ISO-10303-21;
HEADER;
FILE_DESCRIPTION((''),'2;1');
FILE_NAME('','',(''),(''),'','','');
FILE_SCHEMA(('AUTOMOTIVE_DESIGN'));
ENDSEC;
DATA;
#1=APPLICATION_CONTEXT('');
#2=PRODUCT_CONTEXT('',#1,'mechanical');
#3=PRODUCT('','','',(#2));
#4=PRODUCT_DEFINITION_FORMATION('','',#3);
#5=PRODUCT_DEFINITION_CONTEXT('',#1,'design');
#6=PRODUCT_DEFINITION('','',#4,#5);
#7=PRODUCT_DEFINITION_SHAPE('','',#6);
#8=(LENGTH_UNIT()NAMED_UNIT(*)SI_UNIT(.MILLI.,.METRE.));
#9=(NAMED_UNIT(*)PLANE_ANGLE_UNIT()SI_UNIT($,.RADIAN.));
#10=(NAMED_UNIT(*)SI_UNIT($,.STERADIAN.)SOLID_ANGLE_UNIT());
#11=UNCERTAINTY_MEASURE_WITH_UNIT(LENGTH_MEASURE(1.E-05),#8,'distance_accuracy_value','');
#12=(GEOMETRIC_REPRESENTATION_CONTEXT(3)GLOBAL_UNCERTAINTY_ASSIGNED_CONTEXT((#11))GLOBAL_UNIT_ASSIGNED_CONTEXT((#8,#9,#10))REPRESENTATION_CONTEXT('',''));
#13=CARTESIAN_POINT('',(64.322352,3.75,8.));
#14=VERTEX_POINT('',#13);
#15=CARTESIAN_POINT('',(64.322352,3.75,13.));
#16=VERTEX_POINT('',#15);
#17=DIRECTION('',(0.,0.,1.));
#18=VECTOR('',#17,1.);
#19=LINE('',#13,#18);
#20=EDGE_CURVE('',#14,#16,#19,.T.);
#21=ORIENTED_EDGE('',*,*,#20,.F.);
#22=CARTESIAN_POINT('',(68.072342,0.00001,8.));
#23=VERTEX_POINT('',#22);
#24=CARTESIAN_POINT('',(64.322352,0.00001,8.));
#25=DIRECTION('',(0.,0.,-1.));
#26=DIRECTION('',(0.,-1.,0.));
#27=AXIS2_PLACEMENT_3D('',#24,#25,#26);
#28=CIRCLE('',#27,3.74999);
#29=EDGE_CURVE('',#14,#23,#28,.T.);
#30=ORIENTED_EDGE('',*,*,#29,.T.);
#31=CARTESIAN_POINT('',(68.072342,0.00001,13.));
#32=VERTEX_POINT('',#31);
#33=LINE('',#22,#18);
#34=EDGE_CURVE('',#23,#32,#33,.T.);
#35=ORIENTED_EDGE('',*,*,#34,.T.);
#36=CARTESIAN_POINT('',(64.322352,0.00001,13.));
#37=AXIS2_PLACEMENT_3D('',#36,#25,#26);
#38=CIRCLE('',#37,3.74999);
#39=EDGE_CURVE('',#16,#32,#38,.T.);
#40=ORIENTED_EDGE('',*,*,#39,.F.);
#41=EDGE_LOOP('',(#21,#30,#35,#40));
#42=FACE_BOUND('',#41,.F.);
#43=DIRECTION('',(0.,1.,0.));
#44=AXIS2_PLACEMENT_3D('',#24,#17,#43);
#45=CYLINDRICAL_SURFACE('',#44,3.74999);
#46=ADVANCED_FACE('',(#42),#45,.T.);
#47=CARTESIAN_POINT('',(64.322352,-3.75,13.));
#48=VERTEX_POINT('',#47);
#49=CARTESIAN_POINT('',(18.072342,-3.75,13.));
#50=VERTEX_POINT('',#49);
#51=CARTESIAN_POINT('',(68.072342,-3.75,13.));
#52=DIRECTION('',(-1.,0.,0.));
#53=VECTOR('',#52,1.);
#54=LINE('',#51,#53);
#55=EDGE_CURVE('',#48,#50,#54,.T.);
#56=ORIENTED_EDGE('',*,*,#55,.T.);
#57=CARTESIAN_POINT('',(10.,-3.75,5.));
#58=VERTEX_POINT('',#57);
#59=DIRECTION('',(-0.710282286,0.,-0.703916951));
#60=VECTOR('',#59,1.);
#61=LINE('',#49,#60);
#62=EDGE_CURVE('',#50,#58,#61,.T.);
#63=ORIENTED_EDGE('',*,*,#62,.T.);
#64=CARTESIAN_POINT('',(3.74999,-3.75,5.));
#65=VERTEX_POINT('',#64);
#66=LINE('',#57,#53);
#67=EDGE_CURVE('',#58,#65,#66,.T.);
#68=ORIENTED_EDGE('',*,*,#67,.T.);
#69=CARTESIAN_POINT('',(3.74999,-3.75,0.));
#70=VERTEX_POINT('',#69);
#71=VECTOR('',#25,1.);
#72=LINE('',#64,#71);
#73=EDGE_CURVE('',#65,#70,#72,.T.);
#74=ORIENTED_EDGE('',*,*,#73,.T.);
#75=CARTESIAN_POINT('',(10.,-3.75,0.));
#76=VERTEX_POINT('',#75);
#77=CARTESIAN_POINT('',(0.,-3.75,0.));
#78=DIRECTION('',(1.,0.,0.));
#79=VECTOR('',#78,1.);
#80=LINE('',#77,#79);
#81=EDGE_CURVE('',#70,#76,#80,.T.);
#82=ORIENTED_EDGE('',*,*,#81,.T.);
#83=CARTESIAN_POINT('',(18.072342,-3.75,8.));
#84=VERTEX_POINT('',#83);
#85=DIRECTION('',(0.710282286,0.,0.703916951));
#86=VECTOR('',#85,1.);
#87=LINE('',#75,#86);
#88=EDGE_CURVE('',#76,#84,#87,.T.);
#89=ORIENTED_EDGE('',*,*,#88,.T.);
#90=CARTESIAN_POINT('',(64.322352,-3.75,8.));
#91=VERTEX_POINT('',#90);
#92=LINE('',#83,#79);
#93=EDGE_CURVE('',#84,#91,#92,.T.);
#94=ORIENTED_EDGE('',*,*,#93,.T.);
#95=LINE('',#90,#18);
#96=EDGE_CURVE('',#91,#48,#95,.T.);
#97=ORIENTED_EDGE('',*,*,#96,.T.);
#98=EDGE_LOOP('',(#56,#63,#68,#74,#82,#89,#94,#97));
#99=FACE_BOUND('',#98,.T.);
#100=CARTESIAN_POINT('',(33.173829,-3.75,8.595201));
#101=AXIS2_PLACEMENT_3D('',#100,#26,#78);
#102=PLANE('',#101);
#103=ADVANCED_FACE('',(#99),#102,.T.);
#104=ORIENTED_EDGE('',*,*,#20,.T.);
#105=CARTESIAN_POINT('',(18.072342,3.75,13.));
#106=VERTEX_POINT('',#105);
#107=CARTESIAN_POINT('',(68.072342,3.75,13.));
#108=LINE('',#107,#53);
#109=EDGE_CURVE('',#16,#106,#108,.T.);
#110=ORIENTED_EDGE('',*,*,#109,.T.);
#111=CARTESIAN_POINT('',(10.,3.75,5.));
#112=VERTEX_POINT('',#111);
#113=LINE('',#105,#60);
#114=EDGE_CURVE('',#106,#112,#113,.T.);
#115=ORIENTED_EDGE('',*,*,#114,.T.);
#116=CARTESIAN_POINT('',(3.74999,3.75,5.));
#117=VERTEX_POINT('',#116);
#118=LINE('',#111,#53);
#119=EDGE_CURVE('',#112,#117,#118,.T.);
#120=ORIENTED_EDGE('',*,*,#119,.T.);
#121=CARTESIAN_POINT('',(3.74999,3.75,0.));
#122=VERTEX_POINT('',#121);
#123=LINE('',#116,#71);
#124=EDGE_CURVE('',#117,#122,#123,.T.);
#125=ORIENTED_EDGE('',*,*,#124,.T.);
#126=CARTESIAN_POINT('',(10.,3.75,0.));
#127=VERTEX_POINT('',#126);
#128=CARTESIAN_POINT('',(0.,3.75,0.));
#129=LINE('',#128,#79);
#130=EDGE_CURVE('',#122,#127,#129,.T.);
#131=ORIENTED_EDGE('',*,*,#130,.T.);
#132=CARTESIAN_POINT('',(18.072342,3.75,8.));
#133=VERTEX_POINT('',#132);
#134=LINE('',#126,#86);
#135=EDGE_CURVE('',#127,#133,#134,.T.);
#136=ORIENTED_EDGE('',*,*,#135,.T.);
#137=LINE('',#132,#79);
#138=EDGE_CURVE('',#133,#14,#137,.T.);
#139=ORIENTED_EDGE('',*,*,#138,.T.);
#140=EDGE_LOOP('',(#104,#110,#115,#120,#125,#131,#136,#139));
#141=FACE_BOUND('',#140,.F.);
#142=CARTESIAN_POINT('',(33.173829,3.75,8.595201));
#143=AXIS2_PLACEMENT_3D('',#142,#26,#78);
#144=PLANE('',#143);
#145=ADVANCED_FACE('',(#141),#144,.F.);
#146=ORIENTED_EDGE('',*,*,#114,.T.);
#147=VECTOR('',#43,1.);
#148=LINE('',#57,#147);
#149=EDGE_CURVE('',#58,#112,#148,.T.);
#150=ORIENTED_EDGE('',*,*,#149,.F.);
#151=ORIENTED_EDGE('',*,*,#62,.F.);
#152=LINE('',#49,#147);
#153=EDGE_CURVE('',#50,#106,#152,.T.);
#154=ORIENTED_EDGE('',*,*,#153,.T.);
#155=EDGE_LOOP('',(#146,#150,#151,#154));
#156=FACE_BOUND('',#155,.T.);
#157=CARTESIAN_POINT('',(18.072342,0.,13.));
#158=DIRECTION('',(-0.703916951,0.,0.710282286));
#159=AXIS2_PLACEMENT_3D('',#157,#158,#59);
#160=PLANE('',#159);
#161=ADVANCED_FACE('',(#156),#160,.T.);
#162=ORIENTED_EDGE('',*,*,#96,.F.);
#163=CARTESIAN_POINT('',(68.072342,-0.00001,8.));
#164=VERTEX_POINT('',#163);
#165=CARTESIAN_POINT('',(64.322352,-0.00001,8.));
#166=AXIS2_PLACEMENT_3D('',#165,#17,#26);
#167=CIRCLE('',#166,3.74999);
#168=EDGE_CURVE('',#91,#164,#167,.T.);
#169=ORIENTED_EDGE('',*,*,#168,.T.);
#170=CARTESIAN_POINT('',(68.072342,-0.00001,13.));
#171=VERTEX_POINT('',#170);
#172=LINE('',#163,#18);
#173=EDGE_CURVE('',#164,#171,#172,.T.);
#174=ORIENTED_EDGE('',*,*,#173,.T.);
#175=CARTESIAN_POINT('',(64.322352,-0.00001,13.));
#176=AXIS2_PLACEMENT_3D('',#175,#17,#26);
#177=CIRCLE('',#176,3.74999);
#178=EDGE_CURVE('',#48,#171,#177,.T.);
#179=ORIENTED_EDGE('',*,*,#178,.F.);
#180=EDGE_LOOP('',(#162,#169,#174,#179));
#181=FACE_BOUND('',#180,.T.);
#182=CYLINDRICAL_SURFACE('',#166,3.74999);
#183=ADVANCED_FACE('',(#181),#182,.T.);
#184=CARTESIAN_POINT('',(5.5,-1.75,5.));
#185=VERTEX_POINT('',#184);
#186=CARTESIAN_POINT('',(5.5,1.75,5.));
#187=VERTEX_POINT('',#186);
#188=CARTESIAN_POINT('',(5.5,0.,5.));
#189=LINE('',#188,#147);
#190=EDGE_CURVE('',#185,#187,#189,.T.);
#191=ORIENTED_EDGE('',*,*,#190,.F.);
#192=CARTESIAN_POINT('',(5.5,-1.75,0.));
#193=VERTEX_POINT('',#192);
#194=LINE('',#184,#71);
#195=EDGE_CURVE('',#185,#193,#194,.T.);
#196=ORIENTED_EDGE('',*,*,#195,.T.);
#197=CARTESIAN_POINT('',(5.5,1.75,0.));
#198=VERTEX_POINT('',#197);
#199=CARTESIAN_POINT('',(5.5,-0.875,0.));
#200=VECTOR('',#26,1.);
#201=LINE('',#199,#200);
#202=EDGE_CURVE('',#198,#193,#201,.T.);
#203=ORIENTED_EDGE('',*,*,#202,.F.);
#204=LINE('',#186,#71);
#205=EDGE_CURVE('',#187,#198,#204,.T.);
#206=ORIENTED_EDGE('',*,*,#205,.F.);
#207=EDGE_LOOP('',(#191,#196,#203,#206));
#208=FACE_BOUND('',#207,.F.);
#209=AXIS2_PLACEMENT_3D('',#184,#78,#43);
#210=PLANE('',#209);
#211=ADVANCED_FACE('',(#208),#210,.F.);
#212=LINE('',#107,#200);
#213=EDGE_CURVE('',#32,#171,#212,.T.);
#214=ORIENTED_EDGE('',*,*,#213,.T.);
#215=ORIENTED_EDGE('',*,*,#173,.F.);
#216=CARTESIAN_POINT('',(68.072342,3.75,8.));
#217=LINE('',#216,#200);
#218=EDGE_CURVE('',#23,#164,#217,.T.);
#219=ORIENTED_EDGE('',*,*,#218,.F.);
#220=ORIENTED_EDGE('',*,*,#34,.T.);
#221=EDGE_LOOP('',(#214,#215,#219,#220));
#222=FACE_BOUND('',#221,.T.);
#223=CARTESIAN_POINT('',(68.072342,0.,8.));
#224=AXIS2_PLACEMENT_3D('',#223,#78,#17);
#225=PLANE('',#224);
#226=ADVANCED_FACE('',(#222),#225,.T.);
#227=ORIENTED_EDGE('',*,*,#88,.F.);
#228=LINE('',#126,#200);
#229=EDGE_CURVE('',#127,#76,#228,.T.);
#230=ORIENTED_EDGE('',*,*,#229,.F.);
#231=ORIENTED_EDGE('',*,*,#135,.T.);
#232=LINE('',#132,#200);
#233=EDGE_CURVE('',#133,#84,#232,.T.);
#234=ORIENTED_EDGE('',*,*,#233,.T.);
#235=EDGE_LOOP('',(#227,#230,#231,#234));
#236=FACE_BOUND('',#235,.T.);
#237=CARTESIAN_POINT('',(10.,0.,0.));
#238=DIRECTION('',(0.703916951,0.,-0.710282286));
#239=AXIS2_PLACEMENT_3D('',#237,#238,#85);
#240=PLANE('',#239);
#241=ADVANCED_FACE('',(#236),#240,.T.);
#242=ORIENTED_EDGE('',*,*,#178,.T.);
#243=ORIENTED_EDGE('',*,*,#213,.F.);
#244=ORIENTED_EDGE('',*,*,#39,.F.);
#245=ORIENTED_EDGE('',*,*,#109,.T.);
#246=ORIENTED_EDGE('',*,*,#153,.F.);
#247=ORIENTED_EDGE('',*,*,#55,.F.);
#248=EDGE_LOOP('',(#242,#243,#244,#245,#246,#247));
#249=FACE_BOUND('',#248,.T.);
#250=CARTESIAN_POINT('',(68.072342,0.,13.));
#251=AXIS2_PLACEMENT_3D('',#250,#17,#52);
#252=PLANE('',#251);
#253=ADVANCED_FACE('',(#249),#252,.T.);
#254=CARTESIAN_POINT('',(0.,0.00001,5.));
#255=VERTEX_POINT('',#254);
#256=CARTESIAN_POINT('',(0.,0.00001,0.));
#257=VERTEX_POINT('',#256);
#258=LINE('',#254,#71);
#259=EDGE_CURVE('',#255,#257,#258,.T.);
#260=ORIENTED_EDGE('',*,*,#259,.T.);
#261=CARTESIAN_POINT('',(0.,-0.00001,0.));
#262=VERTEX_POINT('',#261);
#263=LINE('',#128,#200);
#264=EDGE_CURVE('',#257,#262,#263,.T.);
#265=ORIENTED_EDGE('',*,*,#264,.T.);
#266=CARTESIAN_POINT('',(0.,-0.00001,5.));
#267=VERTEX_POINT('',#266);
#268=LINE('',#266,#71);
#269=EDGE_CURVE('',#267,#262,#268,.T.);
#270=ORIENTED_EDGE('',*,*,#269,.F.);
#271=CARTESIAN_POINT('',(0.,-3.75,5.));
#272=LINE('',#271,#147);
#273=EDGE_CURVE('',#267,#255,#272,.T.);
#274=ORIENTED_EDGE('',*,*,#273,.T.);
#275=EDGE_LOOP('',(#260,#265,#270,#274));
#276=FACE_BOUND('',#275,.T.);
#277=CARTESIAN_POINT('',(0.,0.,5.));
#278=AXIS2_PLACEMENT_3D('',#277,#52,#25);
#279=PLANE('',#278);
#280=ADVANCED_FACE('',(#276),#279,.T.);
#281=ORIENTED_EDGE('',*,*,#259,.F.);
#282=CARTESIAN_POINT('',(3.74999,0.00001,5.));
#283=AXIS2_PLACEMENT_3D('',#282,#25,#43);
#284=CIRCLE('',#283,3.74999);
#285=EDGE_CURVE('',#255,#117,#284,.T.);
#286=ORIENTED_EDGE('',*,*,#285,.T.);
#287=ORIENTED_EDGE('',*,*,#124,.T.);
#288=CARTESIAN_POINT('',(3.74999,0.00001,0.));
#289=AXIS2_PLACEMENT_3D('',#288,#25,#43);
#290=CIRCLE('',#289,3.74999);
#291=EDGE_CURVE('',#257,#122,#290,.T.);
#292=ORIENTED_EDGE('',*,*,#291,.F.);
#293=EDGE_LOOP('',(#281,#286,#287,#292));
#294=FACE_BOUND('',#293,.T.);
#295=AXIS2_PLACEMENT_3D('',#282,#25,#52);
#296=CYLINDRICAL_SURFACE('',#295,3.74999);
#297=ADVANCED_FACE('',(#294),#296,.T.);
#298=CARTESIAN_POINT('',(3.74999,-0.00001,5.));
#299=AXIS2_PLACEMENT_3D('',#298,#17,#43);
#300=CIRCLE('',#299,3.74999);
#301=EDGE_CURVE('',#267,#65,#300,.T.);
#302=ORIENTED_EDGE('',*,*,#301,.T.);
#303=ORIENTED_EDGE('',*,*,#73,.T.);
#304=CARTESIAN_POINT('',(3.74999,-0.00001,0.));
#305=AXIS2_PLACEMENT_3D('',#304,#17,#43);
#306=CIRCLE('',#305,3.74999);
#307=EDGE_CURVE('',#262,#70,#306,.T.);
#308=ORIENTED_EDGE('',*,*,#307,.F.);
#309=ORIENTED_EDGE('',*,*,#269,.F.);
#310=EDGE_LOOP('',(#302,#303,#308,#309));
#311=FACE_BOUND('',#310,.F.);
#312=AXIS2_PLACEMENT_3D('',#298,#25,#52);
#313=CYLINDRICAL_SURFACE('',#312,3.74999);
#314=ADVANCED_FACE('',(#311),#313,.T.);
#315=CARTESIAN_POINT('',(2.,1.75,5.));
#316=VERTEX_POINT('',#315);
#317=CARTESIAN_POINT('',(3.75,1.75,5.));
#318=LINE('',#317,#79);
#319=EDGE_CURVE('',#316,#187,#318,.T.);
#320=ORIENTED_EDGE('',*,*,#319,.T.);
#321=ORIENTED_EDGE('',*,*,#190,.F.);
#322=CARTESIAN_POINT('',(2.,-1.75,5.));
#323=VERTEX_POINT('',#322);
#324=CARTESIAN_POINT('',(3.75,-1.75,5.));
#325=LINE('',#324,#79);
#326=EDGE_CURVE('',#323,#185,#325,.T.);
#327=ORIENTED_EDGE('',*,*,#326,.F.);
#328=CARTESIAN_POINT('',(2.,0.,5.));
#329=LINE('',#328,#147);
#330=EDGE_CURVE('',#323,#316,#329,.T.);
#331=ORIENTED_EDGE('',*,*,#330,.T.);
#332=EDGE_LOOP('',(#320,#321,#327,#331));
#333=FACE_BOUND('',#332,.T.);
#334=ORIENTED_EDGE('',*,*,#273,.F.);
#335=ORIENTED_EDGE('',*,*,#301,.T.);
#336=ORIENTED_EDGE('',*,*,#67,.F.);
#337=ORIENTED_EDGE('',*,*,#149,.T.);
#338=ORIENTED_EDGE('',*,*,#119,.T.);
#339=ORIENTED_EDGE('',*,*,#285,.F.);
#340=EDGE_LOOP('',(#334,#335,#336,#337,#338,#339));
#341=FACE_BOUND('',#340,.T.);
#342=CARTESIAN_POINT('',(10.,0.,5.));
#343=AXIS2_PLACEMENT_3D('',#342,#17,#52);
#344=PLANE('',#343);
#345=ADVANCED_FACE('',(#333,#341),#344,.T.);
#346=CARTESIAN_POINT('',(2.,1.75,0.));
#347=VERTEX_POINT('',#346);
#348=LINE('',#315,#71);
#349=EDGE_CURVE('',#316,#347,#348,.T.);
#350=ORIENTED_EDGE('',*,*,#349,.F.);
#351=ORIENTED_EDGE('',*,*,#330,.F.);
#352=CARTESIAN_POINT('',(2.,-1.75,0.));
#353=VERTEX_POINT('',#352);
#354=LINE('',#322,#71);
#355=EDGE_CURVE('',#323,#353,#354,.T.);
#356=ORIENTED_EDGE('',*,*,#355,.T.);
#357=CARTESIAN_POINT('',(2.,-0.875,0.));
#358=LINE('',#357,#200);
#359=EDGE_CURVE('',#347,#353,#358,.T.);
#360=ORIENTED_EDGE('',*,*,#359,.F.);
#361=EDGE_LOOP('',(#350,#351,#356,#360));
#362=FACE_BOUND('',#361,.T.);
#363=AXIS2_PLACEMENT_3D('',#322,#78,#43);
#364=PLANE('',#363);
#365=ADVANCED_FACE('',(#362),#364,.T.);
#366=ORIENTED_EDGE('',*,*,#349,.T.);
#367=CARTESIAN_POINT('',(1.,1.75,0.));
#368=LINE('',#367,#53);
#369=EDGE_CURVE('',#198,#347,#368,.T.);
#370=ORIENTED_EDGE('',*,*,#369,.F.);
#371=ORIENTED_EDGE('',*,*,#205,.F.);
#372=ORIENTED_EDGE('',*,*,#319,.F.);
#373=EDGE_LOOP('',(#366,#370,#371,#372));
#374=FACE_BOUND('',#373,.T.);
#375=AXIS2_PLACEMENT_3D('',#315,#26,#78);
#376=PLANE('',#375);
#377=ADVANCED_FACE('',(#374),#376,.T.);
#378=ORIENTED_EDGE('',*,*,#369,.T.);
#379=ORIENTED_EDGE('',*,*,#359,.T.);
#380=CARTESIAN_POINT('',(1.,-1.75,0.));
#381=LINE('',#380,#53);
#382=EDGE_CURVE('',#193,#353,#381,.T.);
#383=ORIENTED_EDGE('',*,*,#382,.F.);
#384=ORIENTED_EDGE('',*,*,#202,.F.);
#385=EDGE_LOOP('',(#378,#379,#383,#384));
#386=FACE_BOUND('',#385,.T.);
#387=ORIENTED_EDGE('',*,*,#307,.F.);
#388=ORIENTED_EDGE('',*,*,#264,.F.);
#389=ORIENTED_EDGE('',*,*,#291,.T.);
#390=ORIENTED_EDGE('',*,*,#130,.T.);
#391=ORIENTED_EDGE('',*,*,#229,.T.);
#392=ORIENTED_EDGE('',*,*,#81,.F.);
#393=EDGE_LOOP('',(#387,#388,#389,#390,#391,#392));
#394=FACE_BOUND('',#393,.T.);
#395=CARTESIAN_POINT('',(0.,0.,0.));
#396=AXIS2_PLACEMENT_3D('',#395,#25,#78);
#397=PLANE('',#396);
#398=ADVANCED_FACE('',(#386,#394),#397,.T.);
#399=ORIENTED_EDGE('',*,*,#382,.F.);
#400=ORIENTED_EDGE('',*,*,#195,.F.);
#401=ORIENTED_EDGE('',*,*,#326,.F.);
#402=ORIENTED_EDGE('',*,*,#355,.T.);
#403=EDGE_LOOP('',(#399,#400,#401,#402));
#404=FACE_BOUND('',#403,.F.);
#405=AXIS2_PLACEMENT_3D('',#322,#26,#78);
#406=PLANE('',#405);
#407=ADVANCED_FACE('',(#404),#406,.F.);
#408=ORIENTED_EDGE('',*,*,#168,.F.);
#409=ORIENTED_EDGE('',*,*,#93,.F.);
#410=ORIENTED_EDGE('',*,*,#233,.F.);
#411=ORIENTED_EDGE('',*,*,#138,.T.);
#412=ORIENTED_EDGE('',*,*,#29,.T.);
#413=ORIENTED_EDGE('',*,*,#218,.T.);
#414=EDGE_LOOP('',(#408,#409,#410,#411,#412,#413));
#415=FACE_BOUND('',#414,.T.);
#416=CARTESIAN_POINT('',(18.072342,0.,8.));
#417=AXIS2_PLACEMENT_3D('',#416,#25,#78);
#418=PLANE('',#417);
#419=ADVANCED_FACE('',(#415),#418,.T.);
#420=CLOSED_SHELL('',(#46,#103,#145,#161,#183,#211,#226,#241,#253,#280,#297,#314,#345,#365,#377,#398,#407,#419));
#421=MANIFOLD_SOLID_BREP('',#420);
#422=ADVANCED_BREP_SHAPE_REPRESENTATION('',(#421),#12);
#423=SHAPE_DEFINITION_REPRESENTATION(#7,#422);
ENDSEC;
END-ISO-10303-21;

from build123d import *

# Parameters (mm, degrees)
F1_DEPTH      = 3.75
F1_DEPTH_BACK = 3.75
F2_W          = 3.5
F2_H          = 3.5
F3_DEPTH      = 5.001
F4_R          = 3.74999
F5_R          = 3.74999


# Not quite as in the source:
# - a fillet or chamfer is up to 0.001 mm smaller than in the source, because OpenCascade refuses the exact size


with BuildPart() as f1:
    # F0 (on Front) → F1 (new body, two sides)
    with BuildSketch(Plane.XZ) as f1_sk:
        Polygon((0, 5), (0, 0), (10, 0), (18.0723418804, 8), (68.0723418804, 8), (68.0723418804, 13), (18.0723418804, 13), (10, 5), align=None)
    extrude(amount=F1_DEPTH)
    extrude(f1_sk.sketch, amount=-F1_DEPTH_BACK)

    # F2 (on face) → F3 (cut, through all)
    with BuildSketch(Plane.XY.offset(5)):
        with Locations((3.75, 0)):
            Rectangle(F2_W, F2_H)
    extrude(amount=-F3_DEPTH, mode=Mode.SUBTRACT)

    # F4 (radius 3.75 in the source; OpenCascade refuses exactly that, so slightly less here)
    f4_edges = [f1.edges().sort_by_distance(p)[0] for p in [
        (0, -3.75, 2.5),
        (0, 3.75, 2.5),
    ]]
    fillet(f4_edges, radius=F4_R)

    # F5 (radius 3.75 in the source; OpenCascade refuses exactly that, so slightly less here)
    f5_edges = [f1.edges().sort_by_distance(p)[0] for p in [
        (68.072342, -3.75, 10.5),
        (68.072342, 3.75, 10.5),
    ]]
    fillet(f5_edges, radius=F5_R)


solid = f1.part
